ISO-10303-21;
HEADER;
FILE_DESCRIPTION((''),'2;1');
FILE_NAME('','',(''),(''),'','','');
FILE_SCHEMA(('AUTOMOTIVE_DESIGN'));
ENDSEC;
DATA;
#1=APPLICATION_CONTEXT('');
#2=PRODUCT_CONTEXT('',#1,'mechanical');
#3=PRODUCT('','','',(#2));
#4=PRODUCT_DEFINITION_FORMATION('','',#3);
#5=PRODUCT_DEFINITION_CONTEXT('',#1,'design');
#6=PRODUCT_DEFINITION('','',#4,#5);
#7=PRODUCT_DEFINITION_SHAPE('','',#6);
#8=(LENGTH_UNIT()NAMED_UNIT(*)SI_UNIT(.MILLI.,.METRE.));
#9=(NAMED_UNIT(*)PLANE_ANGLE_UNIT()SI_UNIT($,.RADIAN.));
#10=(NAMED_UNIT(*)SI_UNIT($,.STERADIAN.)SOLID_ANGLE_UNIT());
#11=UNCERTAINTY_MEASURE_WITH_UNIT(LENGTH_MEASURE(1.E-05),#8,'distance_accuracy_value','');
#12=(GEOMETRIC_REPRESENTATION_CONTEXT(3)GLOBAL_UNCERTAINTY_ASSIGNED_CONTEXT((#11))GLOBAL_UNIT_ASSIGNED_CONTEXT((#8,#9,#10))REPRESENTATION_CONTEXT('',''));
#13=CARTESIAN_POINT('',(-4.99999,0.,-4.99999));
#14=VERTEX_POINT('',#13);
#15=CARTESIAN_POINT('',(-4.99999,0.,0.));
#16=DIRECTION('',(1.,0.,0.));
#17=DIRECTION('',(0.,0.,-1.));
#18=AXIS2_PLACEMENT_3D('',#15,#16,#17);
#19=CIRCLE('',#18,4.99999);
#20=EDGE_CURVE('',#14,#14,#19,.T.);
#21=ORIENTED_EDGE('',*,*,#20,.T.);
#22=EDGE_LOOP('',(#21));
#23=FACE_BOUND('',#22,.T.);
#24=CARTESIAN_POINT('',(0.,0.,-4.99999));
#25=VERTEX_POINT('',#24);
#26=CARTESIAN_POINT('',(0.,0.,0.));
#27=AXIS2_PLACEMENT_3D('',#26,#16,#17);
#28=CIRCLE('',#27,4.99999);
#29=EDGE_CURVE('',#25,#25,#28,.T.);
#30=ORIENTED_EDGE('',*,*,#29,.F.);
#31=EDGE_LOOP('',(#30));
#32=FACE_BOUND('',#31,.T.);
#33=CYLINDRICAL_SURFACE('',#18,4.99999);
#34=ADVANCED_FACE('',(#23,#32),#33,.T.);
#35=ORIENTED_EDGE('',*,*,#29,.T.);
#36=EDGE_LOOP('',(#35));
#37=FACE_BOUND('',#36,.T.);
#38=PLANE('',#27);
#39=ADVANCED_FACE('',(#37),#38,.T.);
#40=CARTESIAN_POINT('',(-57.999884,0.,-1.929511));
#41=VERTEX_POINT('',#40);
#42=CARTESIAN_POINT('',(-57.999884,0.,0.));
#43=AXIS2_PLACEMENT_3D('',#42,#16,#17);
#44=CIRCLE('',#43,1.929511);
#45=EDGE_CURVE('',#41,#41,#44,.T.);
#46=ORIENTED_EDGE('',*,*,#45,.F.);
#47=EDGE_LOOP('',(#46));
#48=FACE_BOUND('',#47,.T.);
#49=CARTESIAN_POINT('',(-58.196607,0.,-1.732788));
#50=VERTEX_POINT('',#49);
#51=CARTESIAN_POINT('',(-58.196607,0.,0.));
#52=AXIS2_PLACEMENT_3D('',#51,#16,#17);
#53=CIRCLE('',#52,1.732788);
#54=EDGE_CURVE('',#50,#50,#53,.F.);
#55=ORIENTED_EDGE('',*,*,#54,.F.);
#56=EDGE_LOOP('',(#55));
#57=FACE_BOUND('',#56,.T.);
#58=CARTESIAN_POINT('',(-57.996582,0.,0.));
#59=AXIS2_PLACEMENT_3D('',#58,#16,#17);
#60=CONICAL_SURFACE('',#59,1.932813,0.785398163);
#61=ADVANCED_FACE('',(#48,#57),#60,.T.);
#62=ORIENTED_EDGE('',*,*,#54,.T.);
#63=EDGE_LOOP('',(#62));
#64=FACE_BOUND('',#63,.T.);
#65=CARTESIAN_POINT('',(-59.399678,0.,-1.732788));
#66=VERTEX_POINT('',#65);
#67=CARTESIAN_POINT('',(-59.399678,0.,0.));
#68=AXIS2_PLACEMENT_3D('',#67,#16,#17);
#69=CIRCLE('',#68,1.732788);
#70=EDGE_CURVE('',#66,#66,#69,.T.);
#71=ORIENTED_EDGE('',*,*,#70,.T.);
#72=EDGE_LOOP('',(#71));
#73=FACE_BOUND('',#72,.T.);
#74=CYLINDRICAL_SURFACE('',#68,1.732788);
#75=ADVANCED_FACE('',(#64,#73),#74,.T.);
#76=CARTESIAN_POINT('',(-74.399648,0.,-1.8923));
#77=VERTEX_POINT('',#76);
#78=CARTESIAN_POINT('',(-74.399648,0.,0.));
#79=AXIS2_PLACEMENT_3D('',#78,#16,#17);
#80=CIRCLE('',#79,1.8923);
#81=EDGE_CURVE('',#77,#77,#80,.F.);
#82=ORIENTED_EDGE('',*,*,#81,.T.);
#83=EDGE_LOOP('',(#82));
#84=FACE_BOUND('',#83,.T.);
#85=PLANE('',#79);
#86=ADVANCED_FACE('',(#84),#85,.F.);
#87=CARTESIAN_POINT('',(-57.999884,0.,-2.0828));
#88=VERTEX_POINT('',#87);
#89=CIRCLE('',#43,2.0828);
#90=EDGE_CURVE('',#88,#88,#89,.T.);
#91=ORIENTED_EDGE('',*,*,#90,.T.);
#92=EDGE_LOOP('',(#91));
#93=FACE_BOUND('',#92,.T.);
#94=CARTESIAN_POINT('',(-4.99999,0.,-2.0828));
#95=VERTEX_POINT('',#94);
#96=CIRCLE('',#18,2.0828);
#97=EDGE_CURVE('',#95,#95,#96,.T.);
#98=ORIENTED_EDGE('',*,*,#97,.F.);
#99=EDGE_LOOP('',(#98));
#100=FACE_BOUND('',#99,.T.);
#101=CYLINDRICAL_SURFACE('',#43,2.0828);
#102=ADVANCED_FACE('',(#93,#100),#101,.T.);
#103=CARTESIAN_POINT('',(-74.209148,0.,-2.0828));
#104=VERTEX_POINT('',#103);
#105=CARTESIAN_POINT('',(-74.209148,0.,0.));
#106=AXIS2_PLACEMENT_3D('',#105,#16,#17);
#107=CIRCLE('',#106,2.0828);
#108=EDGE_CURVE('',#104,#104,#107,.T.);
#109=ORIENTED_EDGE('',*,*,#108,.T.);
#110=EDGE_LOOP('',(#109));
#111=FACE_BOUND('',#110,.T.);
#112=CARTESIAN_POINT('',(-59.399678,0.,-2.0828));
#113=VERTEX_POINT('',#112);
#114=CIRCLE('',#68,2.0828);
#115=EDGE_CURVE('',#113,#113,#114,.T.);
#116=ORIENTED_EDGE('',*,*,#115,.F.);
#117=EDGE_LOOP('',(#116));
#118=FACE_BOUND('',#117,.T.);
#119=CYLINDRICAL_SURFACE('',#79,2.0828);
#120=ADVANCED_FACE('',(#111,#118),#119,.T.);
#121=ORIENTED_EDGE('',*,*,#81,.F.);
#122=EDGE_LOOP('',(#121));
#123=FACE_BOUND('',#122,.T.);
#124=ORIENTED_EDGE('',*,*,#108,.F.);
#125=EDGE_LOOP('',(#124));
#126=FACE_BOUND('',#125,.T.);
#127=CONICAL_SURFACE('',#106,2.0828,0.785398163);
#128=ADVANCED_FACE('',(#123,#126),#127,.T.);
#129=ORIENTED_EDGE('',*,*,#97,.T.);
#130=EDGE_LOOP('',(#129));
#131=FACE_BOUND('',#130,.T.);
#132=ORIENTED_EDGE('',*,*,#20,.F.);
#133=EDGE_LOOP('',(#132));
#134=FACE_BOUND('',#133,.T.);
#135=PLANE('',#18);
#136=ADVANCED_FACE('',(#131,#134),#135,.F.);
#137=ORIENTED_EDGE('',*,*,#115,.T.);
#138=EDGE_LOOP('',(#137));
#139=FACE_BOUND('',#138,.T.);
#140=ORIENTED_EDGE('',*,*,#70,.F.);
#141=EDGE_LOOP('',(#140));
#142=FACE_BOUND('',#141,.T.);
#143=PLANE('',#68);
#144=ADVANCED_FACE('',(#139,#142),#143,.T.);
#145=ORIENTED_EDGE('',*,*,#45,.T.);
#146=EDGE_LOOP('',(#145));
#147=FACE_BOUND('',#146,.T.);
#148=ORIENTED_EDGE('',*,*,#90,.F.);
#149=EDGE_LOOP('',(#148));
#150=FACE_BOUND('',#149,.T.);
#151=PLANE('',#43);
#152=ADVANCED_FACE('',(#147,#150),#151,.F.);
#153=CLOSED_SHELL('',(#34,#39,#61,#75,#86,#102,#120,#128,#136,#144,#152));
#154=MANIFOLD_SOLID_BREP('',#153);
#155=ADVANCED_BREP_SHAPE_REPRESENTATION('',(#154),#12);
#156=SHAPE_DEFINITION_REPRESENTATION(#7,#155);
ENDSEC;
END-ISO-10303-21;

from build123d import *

# Parameters (mm, degrees)
SKETCH1_R           = 4.99999
SKETCH1_R_2         = 2.182749
SKETCH1_R_3         = 2.0828
SKETCH1_R_4         = 1.932813
SKETCH1_R_5         = 1.732788
BOSS_EXTRUDE2_DEPTH = 4.99999
SKETCH1_5_R         = 2.0828
BOSS_EXTRUDE3_DEPTH = 57.999884
BOSS_EXTRUDE4_START = -57.999884
SKETCH1_6_R         = 1.932813
BOSS_EXTRUDE4_DEPTH = 0.199898
BOSS_EXTRUDE5_START = -58.199782
SKETCH1_7_R         = 1.732788
BOSS_EXTRUDE5_DEPTH = 1.199896
BOSS_EXTRUDE6_START = -59.399678
SKETCH1_8_R         = 2.0828
BOSS_EXTRUDE6_DEPTH = 14.99997
CHAMFER1_SIZE       = 0.2032
CHAMFER2_SIZE       = 0.1905


with BuildPart() as part:
    # Sketch1 → Boss-Extrude2 (new body)
    # profile 1 of 5: a face of its own
    with BuildSketch(Plane(origin=(0, 0, 0), x_dir=(0, 0, -1), z_dir=(1, 0, 0))):
        Circle(SKETCH1_R)
        Circle(SKETCH1_R_2, mode=Mode.SUBTRACT)
    # profile 2 of 5: a face of its own
    with BuildSketch(Plane(origin=(0, 0, 0), x_dir=(0, 0, -1), z_dir=(1, 0, 0))):
        Circle(SKETCH1_R_2)
        Circle(SKETCH1_R_3, mode=Mode.SUBTRACT)
    # profile 3 of 5: a face of its own
    with BuildSketch(Plane(origin=(0, 0, 0), x_dir=(0, 0, -1), z_dir=(1, 0, 0))):
        Circle(SKETCH1_R_3)
        Circle(SKETCH1_R_4, mode=Mode.SUBTRACT)
    # profile 4 of 5: a face of its own
    with BuildSketch(Plane(origin=(0, 0, 0), x_dir=(0, 0, -1), z_dir=(1, 0, 0))):
        Circle(SKETCH1_R_4)
        Circle(SKETCH1_R_5, mode=Mode.SUBTRACT)
    # profile 5 of 5: a face of its own
    with BuildSketch(Plane(origin=(0, 0, 0), x_dir=(0, 0, -1), z_dir=(1, 0, 0))):
        Circle(SKETCH1_R_5)
    extrude(amount=-BOSS_EXTRUDE2_DEPTH)

    # Sketch1<5> → Boss-Extrude3 (add)
    with BuildSketch(Plane(origin=(0, 0, 0), x_dir=(0, 0, -1), z_dir=(1, 0, 0))):
        Circle(SKETCH1_5_R)
    extrude(amount=-BOSS_EXTRUDE3_DEPTH)

    # Sketch1<6> → Boss-Extrude4 (add)
    with BuildSketch(Plane(origin=(0, 0, 0), x_dir=(0, 0, -1), z_dir=(1, 0, 0)).offset(BOSS_EXTRUDE4_START)):
        Circle(SKETCH1_6_R)
    extrude(amount=-BOSS_EXTRUDE4_DEPTH)

    # Sketch1<7> → Boss-Extrude5 (add)
    with BuildSketch(Plane(origin=(0, 0, 0), x_dir=(0, 0, -1), z_dir=(1, 0, 0)).offset(BOSS_EXTRUDE5_START)):
        Circle(SKETCH1_7_R)
    extrude(amount=-BOSS_EXTRUDE5_DEPTH)

    # Sketch1<8> → Boss-Extrude6 (add)
    with BuildSketch(Plane(origin=(0, 0, 0), x_dir=(0, 0, -1), z_dir=(1, 0, 0)).offset(BOSS_EXTRUDE6_START)):
        Circle(SKETCH1_8_R)
    extrude(amount=-BOSS_EXTRUDE6_DEPTH)

    # Chamfer1
    # the kernel refuses this chamfer: 0.2032 mm, written as the material it takes off along each edge
    with BuildSketch(Plane(origin=(-58.199782, 0, 0), x_dir=(0, 0, -1), z_dir=(0, -1, 0))) as chamfer1_piece_1_section:
        Polygon((1.932813 - CHAMFER1_SIZE, 0), (1.932813, CHAMFER1_SIZE), (1.932813, 0), align=None)
    chamfer1_piece_1 = revolve(axis=Axis((-58.199782, 0, 0), (1, 0, 0)), mode=Mode.PRIVATE)
    chamfer1_piece_1 = chamfer1_piece_1 - Plane(origin=(-58.102785298, 0, 0), x_dir=(0, 0, -1), z_dir=(1, 0, 0)) * Cylinder(1.732788, 8, mode=Mode.PRIVATE)
    chamfer1_piece_1 = split(chamfer1_piece_1, bisect_by=Plane(origin=(-57.999884, 0, 1.835689298), z_dir=(-1, 0, 0)), keep=Keep.TOP, mode=Mode.PRIVATE)
    add(chamfer1_piece_1, mode=Mode.SUBTRACT)

    # Chamfer2
    chamfer2_edges = [part.edges().sort_by_distance(p)[0] for p in [
        (-74.399648, 0, 2.0828),
    ]]
    chamfer(chamfer2_edges, length=CHAMFER2_SIZE)


solid = part.part
